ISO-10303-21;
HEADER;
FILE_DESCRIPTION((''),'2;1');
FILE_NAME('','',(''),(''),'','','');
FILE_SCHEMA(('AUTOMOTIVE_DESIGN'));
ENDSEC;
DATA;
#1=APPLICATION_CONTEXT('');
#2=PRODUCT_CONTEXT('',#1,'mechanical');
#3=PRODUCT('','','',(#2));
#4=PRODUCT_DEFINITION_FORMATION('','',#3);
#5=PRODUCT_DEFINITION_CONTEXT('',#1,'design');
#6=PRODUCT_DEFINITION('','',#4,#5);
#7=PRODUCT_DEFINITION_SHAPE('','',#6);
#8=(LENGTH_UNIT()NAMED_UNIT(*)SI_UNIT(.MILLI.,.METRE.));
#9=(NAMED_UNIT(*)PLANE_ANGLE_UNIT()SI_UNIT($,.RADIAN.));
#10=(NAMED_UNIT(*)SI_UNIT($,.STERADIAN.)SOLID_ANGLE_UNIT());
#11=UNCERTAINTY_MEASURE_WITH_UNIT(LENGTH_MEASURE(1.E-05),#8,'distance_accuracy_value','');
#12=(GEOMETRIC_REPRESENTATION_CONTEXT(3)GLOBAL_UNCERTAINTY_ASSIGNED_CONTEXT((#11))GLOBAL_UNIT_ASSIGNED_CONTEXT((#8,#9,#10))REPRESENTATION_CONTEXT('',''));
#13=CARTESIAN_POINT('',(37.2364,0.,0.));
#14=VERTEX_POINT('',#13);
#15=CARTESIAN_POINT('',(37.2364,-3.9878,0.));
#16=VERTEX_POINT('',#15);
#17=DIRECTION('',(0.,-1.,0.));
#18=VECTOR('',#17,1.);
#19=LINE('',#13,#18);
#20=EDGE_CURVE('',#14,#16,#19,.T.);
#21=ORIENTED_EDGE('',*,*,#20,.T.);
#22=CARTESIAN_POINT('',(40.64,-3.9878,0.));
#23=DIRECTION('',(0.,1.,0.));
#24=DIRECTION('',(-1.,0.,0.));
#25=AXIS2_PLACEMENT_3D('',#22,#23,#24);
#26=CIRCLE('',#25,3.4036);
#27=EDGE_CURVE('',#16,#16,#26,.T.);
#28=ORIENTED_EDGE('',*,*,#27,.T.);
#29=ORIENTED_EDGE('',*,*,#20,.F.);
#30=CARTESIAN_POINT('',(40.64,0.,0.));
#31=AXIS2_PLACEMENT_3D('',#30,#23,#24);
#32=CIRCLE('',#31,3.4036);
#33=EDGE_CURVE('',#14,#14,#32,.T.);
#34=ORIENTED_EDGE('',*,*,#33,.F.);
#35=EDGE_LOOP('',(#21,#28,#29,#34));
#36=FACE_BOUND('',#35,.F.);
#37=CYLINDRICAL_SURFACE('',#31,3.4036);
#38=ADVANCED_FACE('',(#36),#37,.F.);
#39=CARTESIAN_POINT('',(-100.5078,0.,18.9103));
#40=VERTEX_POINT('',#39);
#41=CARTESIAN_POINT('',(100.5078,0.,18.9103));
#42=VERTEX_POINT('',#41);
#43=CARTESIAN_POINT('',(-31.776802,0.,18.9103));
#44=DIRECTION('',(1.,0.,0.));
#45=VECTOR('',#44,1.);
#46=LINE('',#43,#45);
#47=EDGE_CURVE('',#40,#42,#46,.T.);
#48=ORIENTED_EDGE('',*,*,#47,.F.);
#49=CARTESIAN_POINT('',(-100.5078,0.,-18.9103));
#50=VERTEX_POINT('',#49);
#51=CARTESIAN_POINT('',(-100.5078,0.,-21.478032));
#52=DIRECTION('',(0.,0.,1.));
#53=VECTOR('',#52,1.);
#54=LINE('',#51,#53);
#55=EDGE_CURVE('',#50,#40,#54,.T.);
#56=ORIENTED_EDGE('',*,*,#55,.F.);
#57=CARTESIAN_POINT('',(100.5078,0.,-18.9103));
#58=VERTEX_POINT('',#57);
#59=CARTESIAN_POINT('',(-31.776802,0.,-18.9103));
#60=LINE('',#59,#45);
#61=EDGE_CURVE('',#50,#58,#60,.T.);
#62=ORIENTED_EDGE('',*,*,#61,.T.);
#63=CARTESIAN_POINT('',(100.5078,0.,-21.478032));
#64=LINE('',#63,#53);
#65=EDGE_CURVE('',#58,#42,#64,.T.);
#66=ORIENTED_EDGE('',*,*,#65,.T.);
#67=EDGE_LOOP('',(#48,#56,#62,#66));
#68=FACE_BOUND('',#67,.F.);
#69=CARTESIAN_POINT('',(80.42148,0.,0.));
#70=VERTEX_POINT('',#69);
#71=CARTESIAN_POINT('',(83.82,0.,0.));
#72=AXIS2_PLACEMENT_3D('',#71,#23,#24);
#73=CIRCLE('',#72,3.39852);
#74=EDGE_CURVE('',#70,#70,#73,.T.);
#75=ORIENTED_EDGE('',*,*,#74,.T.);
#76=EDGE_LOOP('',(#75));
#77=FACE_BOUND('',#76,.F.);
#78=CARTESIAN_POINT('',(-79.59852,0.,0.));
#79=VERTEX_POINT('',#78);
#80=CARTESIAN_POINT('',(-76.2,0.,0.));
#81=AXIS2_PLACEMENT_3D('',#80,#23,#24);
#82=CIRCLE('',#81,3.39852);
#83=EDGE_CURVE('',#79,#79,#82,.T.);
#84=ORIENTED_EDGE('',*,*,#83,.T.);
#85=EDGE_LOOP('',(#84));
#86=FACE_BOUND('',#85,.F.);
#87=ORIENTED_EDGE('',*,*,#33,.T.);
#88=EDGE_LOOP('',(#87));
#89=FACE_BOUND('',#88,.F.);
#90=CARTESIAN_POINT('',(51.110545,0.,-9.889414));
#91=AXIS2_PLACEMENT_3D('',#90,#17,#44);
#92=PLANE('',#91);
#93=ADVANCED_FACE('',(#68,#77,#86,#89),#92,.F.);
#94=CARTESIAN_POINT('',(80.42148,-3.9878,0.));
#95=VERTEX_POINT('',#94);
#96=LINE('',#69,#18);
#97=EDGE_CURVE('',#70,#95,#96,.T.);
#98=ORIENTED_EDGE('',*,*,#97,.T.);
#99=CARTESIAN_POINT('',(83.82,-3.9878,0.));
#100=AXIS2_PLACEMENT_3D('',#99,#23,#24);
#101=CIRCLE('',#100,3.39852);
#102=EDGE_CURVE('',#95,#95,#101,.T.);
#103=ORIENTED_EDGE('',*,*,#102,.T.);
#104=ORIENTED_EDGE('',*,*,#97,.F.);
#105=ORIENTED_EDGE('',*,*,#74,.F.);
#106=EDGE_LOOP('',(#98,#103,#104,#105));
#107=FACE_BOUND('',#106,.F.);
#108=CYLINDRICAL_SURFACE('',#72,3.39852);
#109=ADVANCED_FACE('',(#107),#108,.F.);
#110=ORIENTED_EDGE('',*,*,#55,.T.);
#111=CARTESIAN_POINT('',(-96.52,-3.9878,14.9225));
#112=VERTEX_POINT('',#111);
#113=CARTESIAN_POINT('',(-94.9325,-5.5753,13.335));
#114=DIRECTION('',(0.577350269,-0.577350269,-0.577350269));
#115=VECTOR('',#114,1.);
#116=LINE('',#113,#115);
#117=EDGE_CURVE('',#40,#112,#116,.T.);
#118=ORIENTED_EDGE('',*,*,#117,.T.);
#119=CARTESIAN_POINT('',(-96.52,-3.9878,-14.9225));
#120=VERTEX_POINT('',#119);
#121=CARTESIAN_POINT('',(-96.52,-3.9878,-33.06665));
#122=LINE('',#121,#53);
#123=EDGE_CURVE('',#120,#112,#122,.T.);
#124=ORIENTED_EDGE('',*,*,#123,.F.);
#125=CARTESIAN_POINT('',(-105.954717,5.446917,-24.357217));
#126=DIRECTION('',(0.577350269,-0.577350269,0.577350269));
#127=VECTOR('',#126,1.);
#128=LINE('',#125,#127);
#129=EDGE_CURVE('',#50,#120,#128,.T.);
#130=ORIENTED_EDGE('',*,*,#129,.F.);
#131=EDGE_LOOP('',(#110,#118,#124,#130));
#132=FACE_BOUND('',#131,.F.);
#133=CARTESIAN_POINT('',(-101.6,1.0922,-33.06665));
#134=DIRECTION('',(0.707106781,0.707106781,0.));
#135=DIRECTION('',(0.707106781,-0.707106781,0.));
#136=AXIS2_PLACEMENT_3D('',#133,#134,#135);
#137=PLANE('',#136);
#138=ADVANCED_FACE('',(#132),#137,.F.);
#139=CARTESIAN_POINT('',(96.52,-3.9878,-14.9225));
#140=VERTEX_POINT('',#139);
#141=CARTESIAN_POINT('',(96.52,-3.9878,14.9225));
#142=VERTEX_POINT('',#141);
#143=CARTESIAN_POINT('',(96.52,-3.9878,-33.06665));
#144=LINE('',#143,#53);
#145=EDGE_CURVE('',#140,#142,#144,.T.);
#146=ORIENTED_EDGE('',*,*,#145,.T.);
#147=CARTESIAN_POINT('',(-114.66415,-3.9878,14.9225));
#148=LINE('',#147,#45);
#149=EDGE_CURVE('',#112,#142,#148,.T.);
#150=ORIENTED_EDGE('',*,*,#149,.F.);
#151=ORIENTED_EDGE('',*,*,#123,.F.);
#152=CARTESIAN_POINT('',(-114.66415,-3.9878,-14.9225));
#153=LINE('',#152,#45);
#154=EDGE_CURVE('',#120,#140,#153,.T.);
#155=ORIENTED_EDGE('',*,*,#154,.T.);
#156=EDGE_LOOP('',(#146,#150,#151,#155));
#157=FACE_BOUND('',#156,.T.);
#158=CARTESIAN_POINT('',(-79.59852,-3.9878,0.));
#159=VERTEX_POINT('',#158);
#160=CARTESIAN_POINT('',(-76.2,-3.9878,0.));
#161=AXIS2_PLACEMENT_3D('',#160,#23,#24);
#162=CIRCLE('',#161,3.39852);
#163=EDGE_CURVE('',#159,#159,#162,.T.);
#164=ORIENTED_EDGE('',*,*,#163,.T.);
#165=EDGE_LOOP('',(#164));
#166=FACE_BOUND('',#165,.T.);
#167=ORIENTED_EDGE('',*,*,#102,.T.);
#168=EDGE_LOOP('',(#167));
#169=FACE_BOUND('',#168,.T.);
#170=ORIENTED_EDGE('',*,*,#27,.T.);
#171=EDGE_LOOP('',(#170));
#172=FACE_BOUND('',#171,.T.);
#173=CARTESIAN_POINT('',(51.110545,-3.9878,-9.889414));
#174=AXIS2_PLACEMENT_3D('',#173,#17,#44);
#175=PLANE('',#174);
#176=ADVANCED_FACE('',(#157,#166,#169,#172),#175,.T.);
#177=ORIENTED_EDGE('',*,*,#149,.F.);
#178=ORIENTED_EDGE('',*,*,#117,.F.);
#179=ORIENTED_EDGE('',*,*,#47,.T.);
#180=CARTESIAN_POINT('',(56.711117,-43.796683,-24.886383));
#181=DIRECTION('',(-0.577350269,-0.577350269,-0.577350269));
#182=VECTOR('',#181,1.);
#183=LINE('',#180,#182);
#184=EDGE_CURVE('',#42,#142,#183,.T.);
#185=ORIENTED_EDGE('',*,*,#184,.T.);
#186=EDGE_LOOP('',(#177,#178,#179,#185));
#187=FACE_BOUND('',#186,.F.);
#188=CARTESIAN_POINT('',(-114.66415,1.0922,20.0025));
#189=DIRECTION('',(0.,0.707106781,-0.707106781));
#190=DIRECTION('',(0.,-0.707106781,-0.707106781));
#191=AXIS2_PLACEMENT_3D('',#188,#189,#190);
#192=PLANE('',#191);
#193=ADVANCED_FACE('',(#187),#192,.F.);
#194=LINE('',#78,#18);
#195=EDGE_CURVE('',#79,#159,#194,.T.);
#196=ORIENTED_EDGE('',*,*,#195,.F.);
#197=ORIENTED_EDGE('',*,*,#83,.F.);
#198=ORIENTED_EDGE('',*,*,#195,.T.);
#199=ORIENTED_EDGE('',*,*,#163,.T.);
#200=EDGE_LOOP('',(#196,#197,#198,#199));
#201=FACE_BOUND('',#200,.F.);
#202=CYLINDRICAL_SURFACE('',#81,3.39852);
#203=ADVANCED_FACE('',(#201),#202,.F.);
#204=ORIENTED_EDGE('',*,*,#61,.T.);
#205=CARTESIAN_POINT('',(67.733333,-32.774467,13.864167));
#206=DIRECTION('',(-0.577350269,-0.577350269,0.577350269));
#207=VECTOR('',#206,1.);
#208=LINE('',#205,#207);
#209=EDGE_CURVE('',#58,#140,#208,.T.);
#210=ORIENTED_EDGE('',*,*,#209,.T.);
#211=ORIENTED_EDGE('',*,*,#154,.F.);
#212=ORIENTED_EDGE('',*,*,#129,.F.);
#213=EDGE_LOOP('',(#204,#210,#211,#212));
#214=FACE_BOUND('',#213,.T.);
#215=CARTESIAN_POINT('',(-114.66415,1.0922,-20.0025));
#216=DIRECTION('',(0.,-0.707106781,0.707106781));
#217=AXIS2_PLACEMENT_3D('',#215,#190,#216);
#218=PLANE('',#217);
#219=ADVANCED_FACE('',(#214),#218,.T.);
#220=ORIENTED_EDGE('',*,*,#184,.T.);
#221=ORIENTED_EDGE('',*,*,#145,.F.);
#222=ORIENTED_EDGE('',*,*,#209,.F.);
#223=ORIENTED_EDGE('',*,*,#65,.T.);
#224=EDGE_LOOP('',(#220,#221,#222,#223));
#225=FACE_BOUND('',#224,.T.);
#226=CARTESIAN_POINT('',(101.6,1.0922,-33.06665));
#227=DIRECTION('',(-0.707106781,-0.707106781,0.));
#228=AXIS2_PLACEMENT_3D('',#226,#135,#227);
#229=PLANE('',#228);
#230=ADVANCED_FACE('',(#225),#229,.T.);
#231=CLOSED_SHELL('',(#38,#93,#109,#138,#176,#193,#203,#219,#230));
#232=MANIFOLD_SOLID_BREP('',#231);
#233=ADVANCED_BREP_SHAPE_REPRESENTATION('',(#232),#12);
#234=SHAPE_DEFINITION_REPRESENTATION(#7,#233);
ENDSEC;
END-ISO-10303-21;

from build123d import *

# Parameters (mm, degrees)
F1_DEPTH    = 3.9878
F2_T1_DEPTH = 229.3282991577
F2_T3_DEPTH = 66.1332991577


# Not quite as in the source:
# - a fillet or chamfer that OpenCascade refuses, or shapes differently, is made with other operations: its cross-section is extruded or revolved along the edge and cut away or added


with BuildPart() as f1:
    # F0 (on Front) → F1 (new body)
    with BuildSketch(Plane.XZ):
        with BuildLine():
            Line((0, -20.0025), (101.6, -20.0025))
            Line((101.6, -20.0025), (101.6, 0))
            Line((101.6, 0), (87.21852, 0))
            ThreePointArc((87.21852, 0), (83.82, -3.39852), (80.42148, 0))
            Line((80.42148, 0), (44.0436, 0))
            ThreePointArc((44.0436, 0), (40.64, -3.4036), (37.2364, 0))
            Line((37.2364, 0), (0, 0))
            Line((0, 0), (0, -20.0025))
        make_face()
        Polygon((-101.6, -20.0025), (0, -20.0025), (0, 0), (0, 20.0025), (-101.6, 20.0025), (-101.6, 0), align=None)
        with BuildLine():
            ThreePointArc((-72.80148, 0), (-76.2, -3.39852), (-79.59852, 0))
            ThreePointArc((-79.59852, 0), (-76.2, 3.39852), (-72.80148, 0))
        make_face(mode=Mode.SUBTRACT)
        with BuildLine():
            Line((87.21852, 0), (101.6, 0))
            Line((101.6, 0), (101.6, 20.0025))
            Line((101.6, 20.0025), (0, 20.0025))
            Line((0, 20.0025), (0, 0))
            Line((0, 0), (37.2364, 0))
            ThreePointArc((37.2364, 0), (40.64, 3.4036), (44.0436, 0))
            Line((44.0436, 0), (80.42148, 0))
            ThreePointArc((80.42148, 0), (83.82, 3.39852), (87.21852, 0))
        make_face()
    extrude(amount=F1_DEPTH)

    # F2: chamfer of 5.08 on 4 edges, made by hand

    # F2_s2 → F2_t1 (cut)
    with BuildSketch(Plane.YZ.offset(-114.6641495789)):
        Polygon((1.0922, 20.0025), (-3.9878, 14.9225), (-3.9878, 20.0025), align=None)
        Polygon((1.0922, -20.0025), (-3.9878, -14.9225), (-3.9878, -20.0025), align=None)
    extrude(amount=F2_T1_DEPTH, mode=Mode.SUBTRACT)

    # F2_s4 → F2_t3 (cut)
    with BuildSketch(Plane.XY.offset(-33.0666495789)):
        Polygon((-101.6, 1.0922), (-96.52, -3.9878), (-101.6, -3.9878), align=None)
        Polygon((101.6, 1.0922), (96.52, -3.9878), (101.6, -3.9878), align=None)
    extrude(amount=F2_T3_DEPTH, mode=Mode.SUBTRACT)


solid = f1.part
